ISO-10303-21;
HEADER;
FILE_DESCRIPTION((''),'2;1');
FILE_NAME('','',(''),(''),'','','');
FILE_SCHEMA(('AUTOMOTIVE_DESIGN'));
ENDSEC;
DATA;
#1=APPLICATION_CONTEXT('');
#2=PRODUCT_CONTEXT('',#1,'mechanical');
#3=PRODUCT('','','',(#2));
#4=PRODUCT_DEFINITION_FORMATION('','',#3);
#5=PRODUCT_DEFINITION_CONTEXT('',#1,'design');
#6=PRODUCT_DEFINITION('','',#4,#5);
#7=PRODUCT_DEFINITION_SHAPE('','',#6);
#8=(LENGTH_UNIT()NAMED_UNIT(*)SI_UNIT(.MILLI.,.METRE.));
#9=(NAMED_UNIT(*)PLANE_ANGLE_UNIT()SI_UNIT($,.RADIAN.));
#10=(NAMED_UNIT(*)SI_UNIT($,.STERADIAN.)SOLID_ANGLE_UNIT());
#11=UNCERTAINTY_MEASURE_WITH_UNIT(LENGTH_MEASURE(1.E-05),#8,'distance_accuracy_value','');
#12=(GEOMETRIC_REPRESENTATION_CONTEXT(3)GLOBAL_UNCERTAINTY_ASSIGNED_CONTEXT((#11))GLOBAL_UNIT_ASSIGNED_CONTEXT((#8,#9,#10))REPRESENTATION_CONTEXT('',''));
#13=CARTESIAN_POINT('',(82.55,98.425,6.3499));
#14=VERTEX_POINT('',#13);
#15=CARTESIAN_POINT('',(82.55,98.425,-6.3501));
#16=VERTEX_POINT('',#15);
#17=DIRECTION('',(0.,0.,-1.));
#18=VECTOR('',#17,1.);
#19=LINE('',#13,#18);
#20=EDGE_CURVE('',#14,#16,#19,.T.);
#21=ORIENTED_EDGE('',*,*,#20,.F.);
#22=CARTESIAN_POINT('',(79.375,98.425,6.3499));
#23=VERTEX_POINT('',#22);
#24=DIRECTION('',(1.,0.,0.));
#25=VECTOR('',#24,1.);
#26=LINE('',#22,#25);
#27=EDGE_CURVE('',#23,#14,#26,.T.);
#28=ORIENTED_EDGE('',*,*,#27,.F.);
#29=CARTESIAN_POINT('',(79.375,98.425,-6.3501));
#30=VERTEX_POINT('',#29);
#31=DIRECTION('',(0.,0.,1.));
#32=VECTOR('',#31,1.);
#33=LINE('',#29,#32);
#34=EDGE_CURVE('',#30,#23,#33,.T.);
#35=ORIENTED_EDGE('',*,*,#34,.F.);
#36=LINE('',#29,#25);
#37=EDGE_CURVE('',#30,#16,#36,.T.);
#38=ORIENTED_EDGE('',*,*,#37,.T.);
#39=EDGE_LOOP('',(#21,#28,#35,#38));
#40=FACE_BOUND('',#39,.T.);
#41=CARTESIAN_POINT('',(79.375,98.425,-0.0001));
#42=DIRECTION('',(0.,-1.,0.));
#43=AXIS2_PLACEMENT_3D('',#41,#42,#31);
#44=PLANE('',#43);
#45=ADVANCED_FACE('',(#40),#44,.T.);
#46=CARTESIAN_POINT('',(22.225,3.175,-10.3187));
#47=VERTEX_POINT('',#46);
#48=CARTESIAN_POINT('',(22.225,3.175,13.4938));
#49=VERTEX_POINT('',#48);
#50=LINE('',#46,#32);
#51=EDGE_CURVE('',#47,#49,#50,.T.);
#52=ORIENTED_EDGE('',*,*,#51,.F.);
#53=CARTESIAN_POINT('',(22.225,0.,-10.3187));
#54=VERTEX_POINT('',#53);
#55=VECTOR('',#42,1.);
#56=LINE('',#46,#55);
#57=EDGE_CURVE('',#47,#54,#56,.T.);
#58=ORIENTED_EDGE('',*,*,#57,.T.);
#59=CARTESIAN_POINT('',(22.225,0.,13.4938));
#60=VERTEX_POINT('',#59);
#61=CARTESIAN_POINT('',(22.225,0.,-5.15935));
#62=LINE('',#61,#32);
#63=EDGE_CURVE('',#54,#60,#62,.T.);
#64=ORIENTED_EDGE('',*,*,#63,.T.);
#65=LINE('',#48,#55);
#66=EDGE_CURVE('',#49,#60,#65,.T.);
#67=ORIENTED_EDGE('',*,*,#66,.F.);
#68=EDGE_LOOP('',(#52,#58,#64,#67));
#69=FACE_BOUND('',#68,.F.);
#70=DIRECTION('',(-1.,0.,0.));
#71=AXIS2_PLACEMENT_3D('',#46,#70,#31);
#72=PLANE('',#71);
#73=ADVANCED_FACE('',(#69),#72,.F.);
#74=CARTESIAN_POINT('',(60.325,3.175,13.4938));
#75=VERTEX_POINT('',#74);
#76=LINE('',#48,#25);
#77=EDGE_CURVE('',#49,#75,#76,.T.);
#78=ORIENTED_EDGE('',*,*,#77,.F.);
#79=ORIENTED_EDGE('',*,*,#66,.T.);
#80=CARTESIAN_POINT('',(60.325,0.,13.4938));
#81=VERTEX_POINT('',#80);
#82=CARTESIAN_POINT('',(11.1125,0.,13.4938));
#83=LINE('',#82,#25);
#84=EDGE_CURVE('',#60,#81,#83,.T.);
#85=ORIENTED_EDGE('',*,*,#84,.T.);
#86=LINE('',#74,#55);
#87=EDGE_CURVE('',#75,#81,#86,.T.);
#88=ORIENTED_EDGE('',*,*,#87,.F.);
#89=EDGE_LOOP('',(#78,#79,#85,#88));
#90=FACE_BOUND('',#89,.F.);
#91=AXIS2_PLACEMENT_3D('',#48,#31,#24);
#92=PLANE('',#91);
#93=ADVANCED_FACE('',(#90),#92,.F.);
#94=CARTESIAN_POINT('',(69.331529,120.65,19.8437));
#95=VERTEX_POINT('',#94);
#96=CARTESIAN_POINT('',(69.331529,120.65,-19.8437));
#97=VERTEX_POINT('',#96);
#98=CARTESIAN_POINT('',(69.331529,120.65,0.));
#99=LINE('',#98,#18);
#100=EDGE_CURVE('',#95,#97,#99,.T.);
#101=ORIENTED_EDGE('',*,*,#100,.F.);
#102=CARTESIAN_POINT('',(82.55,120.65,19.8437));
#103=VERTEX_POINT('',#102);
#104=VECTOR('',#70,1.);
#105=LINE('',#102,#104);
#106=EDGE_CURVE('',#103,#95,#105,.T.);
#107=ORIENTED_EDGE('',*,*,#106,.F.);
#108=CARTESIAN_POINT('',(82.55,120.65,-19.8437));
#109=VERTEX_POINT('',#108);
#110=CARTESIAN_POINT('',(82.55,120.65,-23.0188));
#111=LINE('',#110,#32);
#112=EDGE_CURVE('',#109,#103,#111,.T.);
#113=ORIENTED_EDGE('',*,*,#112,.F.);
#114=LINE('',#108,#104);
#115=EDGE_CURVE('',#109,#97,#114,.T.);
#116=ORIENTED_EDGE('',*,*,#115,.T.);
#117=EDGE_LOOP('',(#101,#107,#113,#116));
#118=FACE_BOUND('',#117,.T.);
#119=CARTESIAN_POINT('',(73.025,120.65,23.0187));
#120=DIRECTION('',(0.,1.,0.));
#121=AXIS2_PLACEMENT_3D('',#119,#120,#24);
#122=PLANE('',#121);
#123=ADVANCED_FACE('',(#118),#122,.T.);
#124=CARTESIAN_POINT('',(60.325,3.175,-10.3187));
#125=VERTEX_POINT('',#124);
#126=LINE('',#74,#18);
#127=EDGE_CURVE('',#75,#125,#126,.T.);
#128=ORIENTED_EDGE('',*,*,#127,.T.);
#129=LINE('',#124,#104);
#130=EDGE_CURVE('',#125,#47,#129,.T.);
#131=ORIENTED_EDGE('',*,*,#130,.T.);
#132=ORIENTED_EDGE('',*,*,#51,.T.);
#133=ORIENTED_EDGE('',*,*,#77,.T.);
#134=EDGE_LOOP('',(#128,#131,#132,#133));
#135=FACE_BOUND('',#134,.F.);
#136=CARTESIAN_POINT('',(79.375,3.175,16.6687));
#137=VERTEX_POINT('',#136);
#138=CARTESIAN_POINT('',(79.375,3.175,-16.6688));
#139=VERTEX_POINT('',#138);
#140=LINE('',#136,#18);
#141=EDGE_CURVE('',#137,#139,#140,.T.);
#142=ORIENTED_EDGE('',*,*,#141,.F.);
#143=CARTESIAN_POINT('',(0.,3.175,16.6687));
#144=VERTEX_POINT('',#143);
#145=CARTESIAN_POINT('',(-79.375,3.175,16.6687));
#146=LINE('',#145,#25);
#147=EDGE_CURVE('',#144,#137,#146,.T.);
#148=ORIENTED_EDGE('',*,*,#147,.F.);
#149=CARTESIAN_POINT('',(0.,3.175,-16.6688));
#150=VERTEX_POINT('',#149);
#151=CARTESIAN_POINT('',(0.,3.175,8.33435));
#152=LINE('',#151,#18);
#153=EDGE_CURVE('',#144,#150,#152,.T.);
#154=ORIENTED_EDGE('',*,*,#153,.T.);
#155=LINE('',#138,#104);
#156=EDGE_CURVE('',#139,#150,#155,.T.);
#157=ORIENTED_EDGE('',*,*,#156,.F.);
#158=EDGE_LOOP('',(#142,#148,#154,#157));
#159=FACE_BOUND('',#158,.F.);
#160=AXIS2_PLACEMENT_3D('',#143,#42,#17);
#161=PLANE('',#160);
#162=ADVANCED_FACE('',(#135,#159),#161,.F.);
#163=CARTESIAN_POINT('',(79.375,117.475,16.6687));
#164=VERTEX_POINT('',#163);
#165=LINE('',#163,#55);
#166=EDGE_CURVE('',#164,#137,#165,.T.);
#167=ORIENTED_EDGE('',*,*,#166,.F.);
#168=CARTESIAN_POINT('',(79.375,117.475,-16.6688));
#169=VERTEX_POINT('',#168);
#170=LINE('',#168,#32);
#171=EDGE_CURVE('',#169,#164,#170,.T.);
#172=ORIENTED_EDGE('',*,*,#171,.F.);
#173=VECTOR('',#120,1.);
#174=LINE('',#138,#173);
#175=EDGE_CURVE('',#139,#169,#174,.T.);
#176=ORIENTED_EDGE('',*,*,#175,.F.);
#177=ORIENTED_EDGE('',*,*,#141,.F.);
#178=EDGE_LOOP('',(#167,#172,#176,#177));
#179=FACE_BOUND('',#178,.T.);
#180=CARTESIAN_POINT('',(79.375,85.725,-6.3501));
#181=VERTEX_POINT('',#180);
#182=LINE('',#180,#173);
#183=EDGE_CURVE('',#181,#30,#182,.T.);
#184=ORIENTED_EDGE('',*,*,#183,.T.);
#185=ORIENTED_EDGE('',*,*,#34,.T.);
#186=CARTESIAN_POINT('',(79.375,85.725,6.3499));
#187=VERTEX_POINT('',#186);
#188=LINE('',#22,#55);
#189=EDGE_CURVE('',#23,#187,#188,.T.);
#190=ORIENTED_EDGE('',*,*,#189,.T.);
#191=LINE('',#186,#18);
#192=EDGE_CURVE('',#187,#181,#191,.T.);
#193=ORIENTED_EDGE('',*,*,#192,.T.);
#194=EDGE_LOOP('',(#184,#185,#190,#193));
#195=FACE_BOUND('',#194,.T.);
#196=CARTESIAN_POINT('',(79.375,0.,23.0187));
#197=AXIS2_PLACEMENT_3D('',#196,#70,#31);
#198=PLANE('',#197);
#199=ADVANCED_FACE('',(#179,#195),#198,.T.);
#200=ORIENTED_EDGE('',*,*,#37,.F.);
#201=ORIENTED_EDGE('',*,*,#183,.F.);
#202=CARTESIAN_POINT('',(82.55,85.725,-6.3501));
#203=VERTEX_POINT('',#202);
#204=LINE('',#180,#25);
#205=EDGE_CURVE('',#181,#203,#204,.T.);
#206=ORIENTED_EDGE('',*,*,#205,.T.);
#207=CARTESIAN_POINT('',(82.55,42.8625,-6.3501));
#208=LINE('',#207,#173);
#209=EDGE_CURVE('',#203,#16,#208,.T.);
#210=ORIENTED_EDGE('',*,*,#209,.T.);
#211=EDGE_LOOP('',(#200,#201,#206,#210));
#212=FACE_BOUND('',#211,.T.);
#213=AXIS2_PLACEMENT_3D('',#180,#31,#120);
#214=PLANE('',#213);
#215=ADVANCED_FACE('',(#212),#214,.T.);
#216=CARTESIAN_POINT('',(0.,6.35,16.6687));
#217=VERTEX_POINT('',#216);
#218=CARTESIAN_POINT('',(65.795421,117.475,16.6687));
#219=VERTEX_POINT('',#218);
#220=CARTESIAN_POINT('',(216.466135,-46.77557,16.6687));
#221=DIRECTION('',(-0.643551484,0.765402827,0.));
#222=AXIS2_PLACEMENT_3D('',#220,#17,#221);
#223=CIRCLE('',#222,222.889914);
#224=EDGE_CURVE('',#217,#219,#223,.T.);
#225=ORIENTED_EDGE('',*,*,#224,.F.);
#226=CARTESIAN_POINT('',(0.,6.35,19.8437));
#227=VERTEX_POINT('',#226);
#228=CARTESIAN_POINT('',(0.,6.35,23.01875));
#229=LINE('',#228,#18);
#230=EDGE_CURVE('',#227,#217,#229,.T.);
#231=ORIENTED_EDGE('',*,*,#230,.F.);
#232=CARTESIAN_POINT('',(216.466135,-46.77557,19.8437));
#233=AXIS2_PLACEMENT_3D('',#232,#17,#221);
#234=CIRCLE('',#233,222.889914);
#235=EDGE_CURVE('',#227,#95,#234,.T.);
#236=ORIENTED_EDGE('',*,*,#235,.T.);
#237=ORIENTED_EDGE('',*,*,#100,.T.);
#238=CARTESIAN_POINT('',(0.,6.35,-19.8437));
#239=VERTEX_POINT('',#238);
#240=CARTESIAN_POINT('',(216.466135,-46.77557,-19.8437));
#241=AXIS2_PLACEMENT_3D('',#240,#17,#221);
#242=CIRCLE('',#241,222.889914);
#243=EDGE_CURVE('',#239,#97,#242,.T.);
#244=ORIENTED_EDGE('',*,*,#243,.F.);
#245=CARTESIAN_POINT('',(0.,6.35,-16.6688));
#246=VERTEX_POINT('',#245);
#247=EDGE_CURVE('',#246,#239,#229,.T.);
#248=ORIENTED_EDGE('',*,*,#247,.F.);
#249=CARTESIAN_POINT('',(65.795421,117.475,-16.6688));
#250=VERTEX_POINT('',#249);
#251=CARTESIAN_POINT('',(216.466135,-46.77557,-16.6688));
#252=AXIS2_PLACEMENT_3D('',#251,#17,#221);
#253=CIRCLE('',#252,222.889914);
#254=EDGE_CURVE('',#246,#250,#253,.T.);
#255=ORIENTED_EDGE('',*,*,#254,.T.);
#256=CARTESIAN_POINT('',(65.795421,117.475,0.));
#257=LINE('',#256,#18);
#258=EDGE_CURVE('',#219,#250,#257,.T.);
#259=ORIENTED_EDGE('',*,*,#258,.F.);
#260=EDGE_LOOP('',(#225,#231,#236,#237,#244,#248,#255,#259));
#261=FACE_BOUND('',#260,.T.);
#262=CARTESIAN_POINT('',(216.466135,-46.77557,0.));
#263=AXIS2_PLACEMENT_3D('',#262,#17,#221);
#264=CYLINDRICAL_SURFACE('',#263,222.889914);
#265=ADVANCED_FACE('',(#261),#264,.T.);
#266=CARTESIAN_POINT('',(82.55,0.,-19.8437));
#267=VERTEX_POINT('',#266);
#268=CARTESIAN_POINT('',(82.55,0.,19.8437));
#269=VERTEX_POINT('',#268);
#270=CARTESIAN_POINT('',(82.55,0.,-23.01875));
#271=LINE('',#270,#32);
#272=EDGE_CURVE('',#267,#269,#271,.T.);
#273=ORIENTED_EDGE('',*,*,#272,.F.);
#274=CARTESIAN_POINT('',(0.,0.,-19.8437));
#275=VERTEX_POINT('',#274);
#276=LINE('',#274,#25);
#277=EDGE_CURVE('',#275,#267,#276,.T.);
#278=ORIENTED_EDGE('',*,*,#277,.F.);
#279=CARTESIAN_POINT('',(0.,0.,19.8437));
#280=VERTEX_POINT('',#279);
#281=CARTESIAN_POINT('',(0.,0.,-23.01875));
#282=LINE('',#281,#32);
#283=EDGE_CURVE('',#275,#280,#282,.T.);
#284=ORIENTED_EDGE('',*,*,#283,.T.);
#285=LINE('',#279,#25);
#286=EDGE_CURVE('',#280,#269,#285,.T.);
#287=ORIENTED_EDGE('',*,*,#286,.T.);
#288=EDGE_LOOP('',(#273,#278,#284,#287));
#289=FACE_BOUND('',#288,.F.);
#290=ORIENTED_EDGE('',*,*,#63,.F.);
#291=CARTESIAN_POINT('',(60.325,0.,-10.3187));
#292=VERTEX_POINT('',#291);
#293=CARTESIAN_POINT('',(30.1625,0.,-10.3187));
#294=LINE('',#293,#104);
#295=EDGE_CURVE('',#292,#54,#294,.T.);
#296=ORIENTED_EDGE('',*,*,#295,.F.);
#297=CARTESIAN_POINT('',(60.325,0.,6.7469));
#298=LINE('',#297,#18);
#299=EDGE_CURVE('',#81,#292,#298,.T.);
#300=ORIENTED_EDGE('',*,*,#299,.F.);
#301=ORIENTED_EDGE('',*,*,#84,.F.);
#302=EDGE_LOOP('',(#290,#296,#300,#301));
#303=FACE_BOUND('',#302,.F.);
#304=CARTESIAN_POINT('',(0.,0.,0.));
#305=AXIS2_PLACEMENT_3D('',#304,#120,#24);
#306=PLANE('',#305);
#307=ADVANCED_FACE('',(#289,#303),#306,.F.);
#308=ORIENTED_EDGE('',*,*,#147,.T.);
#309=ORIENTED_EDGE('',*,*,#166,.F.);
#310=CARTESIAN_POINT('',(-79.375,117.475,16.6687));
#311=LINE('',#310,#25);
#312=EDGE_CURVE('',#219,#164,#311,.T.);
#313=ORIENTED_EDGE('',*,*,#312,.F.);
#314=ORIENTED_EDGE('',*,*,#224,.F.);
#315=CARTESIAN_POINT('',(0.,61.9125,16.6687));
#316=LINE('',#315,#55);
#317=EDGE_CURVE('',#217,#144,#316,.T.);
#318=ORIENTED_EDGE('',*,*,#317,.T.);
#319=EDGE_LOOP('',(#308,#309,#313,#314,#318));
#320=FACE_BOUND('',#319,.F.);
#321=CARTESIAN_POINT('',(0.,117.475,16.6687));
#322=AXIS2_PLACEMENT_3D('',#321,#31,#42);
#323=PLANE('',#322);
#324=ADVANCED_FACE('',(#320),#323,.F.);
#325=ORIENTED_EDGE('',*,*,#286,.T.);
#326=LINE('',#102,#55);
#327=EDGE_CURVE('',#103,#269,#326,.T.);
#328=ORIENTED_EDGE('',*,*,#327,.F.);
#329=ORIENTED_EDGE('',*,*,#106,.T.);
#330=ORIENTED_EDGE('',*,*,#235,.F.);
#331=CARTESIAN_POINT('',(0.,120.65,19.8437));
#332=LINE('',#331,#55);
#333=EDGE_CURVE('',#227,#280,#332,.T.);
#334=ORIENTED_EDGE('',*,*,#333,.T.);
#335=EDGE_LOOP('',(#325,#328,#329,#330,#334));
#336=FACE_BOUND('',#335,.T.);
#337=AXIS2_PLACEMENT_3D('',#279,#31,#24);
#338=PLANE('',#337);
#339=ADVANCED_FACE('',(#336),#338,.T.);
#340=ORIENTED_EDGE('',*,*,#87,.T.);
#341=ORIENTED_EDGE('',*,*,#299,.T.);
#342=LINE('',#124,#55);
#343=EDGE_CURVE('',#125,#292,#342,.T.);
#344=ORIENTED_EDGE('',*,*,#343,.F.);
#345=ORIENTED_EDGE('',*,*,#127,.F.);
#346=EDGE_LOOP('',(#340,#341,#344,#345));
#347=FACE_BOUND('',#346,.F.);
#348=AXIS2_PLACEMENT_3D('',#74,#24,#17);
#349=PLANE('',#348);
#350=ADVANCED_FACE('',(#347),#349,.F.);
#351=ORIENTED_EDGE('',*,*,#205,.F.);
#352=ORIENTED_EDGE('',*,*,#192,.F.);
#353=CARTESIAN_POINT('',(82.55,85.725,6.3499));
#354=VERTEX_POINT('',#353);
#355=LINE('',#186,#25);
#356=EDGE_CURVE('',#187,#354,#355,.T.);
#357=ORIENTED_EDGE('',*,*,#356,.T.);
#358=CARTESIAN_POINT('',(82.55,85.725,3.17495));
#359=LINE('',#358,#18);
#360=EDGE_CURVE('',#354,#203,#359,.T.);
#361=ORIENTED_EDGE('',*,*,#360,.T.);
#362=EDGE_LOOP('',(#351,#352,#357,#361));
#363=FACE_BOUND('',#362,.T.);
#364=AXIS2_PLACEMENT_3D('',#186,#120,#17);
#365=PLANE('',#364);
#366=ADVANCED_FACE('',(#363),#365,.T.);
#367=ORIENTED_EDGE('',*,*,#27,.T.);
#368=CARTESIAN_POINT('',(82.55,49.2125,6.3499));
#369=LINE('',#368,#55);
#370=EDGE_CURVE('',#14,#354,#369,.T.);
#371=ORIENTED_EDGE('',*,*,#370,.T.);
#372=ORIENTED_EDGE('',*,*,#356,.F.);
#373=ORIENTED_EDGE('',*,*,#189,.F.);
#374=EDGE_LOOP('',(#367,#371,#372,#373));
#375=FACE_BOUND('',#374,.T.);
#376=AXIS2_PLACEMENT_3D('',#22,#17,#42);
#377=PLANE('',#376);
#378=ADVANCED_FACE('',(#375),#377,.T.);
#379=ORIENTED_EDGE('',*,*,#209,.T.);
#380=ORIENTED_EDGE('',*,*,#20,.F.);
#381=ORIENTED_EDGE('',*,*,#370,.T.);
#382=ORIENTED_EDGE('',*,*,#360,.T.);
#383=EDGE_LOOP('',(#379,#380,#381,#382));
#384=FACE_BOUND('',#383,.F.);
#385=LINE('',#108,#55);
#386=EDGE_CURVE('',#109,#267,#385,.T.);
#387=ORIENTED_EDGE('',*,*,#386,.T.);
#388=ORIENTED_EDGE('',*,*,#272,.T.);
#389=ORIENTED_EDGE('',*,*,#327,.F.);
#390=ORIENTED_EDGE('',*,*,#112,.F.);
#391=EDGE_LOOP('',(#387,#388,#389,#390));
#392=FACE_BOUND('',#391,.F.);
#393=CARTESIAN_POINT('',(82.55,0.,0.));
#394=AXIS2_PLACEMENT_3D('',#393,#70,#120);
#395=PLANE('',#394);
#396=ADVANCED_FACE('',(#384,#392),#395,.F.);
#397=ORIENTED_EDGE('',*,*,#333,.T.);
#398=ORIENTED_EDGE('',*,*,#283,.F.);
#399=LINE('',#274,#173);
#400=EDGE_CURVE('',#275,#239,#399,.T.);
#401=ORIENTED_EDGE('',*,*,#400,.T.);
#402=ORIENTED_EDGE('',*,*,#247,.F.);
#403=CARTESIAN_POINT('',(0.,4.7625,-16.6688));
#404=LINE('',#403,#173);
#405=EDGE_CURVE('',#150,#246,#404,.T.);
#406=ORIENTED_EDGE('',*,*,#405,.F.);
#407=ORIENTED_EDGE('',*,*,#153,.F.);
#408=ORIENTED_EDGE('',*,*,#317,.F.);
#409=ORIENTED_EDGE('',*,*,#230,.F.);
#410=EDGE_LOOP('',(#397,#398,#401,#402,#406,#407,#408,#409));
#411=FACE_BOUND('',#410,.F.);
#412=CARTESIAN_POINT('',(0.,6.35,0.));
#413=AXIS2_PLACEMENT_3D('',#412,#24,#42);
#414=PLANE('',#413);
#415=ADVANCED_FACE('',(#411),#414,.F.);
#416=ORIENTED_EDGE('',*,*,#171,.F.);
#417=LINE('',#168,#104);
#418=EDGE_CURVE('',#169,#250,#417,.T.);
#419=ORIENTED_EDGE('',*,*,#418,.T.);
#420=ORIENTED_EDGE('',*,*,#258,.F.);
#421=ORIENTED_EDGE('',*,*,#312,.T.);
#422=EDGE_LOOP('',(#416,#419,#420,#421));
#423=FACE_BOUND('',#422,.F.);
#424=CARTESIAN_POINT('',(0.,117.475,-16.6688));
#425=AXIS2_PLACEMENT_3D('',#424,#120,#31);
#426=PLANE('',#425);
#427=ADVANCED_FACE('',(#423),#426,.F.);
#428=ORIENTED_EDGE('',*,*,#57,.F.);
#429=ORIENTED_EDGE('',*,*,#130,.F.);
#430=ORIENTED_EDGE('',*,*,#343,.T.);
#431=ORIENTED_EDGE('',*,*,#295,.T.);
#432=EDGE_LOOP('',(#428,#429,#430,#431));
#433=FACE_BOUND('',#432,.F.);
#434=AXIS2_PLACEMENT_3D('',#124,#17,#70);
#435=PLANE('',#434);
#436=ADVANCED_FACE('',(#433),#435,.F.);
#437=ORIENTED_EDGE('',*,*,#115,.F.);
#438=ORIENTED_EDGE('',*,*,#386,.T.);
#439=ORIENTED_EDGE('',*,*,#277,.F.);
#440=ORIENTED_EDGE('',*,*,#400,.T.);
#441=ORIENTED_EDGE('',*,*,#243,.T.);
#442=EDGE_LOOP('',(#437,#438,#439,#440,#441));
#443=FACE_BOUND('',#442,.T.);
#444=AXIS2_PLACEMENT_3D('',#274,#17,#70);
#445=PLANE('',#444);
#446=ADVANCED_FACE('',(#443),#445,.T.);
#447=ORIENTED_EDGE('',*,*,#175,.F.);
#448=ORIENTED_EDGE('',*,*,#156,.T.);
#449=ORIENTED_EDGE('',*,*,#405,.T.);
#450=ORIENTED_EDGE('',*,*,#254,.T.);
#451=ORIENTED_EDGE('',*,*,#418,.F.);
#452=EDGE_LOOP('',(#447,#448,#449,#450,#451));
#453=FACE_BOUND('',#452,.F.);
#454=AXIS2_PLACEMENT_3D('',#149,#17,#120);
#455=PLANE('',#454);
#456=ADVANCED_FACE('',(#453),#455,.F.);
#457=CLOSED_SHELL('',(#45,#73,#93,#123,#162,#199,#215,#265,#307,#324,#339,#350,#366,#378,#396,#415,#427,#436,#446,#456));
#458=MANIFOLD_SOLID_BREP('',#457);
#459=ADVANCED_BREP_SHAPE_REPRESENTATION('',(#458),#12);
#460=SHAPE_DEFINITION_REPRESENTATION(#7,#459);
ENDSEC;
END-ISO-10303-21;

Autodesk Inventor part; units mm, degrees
ref_plane "YZ Plane" through (0, 0, 0) normal (1, 0, 0) x (0, 1, 0)
ref_plane "XZ Plane" through (0, 0, 0) normal (0, 1, 0) x (-1, 0, 0)
ref_plane "XY Plane" through (0, 0, 0) normal (0, 0, 1) x (1, 0, 0)
sketch "Sketch1" plane through (0, 0, 0) normal (0, 0, 1) x (1, 0, 0)
  line L0 (0, 0) -> (82.55, 0)
  line L1 (82.55, 0) -> (82.55, 123.825)
  line L2 (82.55, 123.825) -> (0, 123.825)
  line L3 (0, 123.825) -> (0, 0)
  arc A0 (73.025, 123.825) -> (0, 6.35) centre (216.4664, -46.7758) ccw
  point P0 (60.325, 123.825)
  dimension "d0" = 82.55
  dimension "d1" = 123.825
  dimension "d5" = 9.525
  dimension "d6" = 6.35
extrude "Extrusion1" add sketch "Sketch1" along normal mid plane 46.0375 contours L3 A0 L2 L1 L0
sketch "Sketch3" plane through (0, 0, 23.0187) normal (-1, 0, 0) x (0, 0, 1)
  line L0 (-39.6875, 117.475) -> (-6.35, 117.475)
  line L1 (-6.35, 117.475) -> (-6.35, 3.175)
  line L2 (-6.35, 3.175) -> (-39.6875, 3.175)
  line L3 (-39.6875, 3.175) -> (-39.6875, 117.475)
  line L4 (0, 6.35) -> (0, 123.825) projected
  line L5 (-46.0375, 123.825) -> (0, 123.825) projected
  point P0 (-23.0187, 0)
  dimension "d9" = 33.3375
  dimension "d10" = 114.3
  dimension "d11" = 6.35
  dimension "d12" = 6.35
extrude "Extrusion2" cut sketch "Sketch3" along normal mid plane 158.75
sketch "Sketch4" plane through (79.375, 0, 23.0187) normal (-1, 0, 0) x (0, 0, 1)
  line L0 (-39.6875, 117.475) -> (-6.35, 117.475) projected
  line L1 (-39.6875, 117.475) -> (-6.35, 117.475) projected
  line L2 (-23.0188, 117.475) -> (-23.0188, 92.075)
  line L3 (-29.3688, 98.425) -> (-16.6688, 98.425)
  line L4 (-16.6688, 98.425) -> (-16.6688, 85.725)
  line L5 (-16.6688, 85.725) -> (-29.3688, 85.725)
  line L6 (-29.3688, 85.725) -> (-29.3688, 98.425)
  line L7 (-29.3688, 98.425) -> (-16.6688, 85.725) construction
  line L8 (-16.6688, 98.425) -> (-29.3688, 85.725) construction
  point P0 (-23.0187, 0)
  dimension "d26" = 25.4
  dimension "d27" = 12.7
  dimension "d28" = 12.7
extrude "Extrusion3" cut sketch "Sketch4" against normal through all
sketch "Sketch5" plane through (0, 3.175, 16.6688) normal (0, 1, 0) x (1, 0, 0)
  line L0 (60.325, 26.9875) -> (22.225, 26.9875)
  line L1 (22.225, 26.9875) -> (22.225, 3.175)
  line L2 (22.225, 3.175) -> (60.325, 3.175)
  line L3 (60.325, 3.175) -> (60.325, 26.9875)
  line L4 (65.7954, 33.3375) -> (0, 33.3375) projected
  line L5 (0, 0) -> (65.7954, 0) projected
  line L6 (0, 0) -> (0, 33.3375) projected
  point P0 (0, 16.6688)
  dimension "d20" = 6.35
  dimension "d21" = 3.175
  dimension "d22" = 22.225
  dimension "d23" = 38.1
extrude "Extrusion4" cut sketch "Sketch5" against normal blind 63.5
sketch "Sketch6" plane through (73.025, 123.825, 23.0187) normal (0, 1, 0) x (1, 0, 0)
  line L0 (9.525, 46.0375) -> (9.525, 0) projected
  line L1 (-73.025, 0) -> (9.525, 0) projected
  line L2 (9.525, 46.0375) -> (-7.684, 46.0375)
  line L3 (-7.684, 46.0375) -> (-7.684, 0)
  line L4 (-7.684, 0) -> (9.525, 0)
  line L5 (9.525, 0) -> (9.525, 46.0375)
  point P0 (-73.025, 23.0187)
extrude "Extrusion5" cut sketch "Sketch6" against normal blind 3.175
sketch "Sketch7" plane through (0, 0, 23.0187) normal (0, 0, 1) x (1, 0, 0)
  line L0 (82.55, 120.65) -> (82.55, 0) projected
  line L1 (0, 0) -> (82.55, 0)
  line L2 (82.55, 0) -> (82.55, 120.65)
  line L3 (82.55, 120.65) -> (0, 120.65)
  line L4 (0, 120.65) -> (0, 0)
extrude "Extrusion6" cut sketch "Sketch7" against normal blind 3.175
sketch "Sketch8" plane through (0, 0, -23.0187) normal (0, 0, -1) x (-1, 0, 0)
  line L0 (0, 0) -> (0, 6.35) projected
  line L1 (-82.55, 120.65) -> (-82.55, 0) projected
  line L2 (0, 0) -> (-82.55, 0)
  line L3 (-82.55, 0) -> (-82.55, 120.65)
  line L4 (-82.55, 120.65) -> (0, 120.65)
  line L5 (0, 120.65) -> (0, 0)
extrude "Extrusion7" cut sketch "Sketch8" against normal blind 3.175
properties part number "Pi Chassis"
